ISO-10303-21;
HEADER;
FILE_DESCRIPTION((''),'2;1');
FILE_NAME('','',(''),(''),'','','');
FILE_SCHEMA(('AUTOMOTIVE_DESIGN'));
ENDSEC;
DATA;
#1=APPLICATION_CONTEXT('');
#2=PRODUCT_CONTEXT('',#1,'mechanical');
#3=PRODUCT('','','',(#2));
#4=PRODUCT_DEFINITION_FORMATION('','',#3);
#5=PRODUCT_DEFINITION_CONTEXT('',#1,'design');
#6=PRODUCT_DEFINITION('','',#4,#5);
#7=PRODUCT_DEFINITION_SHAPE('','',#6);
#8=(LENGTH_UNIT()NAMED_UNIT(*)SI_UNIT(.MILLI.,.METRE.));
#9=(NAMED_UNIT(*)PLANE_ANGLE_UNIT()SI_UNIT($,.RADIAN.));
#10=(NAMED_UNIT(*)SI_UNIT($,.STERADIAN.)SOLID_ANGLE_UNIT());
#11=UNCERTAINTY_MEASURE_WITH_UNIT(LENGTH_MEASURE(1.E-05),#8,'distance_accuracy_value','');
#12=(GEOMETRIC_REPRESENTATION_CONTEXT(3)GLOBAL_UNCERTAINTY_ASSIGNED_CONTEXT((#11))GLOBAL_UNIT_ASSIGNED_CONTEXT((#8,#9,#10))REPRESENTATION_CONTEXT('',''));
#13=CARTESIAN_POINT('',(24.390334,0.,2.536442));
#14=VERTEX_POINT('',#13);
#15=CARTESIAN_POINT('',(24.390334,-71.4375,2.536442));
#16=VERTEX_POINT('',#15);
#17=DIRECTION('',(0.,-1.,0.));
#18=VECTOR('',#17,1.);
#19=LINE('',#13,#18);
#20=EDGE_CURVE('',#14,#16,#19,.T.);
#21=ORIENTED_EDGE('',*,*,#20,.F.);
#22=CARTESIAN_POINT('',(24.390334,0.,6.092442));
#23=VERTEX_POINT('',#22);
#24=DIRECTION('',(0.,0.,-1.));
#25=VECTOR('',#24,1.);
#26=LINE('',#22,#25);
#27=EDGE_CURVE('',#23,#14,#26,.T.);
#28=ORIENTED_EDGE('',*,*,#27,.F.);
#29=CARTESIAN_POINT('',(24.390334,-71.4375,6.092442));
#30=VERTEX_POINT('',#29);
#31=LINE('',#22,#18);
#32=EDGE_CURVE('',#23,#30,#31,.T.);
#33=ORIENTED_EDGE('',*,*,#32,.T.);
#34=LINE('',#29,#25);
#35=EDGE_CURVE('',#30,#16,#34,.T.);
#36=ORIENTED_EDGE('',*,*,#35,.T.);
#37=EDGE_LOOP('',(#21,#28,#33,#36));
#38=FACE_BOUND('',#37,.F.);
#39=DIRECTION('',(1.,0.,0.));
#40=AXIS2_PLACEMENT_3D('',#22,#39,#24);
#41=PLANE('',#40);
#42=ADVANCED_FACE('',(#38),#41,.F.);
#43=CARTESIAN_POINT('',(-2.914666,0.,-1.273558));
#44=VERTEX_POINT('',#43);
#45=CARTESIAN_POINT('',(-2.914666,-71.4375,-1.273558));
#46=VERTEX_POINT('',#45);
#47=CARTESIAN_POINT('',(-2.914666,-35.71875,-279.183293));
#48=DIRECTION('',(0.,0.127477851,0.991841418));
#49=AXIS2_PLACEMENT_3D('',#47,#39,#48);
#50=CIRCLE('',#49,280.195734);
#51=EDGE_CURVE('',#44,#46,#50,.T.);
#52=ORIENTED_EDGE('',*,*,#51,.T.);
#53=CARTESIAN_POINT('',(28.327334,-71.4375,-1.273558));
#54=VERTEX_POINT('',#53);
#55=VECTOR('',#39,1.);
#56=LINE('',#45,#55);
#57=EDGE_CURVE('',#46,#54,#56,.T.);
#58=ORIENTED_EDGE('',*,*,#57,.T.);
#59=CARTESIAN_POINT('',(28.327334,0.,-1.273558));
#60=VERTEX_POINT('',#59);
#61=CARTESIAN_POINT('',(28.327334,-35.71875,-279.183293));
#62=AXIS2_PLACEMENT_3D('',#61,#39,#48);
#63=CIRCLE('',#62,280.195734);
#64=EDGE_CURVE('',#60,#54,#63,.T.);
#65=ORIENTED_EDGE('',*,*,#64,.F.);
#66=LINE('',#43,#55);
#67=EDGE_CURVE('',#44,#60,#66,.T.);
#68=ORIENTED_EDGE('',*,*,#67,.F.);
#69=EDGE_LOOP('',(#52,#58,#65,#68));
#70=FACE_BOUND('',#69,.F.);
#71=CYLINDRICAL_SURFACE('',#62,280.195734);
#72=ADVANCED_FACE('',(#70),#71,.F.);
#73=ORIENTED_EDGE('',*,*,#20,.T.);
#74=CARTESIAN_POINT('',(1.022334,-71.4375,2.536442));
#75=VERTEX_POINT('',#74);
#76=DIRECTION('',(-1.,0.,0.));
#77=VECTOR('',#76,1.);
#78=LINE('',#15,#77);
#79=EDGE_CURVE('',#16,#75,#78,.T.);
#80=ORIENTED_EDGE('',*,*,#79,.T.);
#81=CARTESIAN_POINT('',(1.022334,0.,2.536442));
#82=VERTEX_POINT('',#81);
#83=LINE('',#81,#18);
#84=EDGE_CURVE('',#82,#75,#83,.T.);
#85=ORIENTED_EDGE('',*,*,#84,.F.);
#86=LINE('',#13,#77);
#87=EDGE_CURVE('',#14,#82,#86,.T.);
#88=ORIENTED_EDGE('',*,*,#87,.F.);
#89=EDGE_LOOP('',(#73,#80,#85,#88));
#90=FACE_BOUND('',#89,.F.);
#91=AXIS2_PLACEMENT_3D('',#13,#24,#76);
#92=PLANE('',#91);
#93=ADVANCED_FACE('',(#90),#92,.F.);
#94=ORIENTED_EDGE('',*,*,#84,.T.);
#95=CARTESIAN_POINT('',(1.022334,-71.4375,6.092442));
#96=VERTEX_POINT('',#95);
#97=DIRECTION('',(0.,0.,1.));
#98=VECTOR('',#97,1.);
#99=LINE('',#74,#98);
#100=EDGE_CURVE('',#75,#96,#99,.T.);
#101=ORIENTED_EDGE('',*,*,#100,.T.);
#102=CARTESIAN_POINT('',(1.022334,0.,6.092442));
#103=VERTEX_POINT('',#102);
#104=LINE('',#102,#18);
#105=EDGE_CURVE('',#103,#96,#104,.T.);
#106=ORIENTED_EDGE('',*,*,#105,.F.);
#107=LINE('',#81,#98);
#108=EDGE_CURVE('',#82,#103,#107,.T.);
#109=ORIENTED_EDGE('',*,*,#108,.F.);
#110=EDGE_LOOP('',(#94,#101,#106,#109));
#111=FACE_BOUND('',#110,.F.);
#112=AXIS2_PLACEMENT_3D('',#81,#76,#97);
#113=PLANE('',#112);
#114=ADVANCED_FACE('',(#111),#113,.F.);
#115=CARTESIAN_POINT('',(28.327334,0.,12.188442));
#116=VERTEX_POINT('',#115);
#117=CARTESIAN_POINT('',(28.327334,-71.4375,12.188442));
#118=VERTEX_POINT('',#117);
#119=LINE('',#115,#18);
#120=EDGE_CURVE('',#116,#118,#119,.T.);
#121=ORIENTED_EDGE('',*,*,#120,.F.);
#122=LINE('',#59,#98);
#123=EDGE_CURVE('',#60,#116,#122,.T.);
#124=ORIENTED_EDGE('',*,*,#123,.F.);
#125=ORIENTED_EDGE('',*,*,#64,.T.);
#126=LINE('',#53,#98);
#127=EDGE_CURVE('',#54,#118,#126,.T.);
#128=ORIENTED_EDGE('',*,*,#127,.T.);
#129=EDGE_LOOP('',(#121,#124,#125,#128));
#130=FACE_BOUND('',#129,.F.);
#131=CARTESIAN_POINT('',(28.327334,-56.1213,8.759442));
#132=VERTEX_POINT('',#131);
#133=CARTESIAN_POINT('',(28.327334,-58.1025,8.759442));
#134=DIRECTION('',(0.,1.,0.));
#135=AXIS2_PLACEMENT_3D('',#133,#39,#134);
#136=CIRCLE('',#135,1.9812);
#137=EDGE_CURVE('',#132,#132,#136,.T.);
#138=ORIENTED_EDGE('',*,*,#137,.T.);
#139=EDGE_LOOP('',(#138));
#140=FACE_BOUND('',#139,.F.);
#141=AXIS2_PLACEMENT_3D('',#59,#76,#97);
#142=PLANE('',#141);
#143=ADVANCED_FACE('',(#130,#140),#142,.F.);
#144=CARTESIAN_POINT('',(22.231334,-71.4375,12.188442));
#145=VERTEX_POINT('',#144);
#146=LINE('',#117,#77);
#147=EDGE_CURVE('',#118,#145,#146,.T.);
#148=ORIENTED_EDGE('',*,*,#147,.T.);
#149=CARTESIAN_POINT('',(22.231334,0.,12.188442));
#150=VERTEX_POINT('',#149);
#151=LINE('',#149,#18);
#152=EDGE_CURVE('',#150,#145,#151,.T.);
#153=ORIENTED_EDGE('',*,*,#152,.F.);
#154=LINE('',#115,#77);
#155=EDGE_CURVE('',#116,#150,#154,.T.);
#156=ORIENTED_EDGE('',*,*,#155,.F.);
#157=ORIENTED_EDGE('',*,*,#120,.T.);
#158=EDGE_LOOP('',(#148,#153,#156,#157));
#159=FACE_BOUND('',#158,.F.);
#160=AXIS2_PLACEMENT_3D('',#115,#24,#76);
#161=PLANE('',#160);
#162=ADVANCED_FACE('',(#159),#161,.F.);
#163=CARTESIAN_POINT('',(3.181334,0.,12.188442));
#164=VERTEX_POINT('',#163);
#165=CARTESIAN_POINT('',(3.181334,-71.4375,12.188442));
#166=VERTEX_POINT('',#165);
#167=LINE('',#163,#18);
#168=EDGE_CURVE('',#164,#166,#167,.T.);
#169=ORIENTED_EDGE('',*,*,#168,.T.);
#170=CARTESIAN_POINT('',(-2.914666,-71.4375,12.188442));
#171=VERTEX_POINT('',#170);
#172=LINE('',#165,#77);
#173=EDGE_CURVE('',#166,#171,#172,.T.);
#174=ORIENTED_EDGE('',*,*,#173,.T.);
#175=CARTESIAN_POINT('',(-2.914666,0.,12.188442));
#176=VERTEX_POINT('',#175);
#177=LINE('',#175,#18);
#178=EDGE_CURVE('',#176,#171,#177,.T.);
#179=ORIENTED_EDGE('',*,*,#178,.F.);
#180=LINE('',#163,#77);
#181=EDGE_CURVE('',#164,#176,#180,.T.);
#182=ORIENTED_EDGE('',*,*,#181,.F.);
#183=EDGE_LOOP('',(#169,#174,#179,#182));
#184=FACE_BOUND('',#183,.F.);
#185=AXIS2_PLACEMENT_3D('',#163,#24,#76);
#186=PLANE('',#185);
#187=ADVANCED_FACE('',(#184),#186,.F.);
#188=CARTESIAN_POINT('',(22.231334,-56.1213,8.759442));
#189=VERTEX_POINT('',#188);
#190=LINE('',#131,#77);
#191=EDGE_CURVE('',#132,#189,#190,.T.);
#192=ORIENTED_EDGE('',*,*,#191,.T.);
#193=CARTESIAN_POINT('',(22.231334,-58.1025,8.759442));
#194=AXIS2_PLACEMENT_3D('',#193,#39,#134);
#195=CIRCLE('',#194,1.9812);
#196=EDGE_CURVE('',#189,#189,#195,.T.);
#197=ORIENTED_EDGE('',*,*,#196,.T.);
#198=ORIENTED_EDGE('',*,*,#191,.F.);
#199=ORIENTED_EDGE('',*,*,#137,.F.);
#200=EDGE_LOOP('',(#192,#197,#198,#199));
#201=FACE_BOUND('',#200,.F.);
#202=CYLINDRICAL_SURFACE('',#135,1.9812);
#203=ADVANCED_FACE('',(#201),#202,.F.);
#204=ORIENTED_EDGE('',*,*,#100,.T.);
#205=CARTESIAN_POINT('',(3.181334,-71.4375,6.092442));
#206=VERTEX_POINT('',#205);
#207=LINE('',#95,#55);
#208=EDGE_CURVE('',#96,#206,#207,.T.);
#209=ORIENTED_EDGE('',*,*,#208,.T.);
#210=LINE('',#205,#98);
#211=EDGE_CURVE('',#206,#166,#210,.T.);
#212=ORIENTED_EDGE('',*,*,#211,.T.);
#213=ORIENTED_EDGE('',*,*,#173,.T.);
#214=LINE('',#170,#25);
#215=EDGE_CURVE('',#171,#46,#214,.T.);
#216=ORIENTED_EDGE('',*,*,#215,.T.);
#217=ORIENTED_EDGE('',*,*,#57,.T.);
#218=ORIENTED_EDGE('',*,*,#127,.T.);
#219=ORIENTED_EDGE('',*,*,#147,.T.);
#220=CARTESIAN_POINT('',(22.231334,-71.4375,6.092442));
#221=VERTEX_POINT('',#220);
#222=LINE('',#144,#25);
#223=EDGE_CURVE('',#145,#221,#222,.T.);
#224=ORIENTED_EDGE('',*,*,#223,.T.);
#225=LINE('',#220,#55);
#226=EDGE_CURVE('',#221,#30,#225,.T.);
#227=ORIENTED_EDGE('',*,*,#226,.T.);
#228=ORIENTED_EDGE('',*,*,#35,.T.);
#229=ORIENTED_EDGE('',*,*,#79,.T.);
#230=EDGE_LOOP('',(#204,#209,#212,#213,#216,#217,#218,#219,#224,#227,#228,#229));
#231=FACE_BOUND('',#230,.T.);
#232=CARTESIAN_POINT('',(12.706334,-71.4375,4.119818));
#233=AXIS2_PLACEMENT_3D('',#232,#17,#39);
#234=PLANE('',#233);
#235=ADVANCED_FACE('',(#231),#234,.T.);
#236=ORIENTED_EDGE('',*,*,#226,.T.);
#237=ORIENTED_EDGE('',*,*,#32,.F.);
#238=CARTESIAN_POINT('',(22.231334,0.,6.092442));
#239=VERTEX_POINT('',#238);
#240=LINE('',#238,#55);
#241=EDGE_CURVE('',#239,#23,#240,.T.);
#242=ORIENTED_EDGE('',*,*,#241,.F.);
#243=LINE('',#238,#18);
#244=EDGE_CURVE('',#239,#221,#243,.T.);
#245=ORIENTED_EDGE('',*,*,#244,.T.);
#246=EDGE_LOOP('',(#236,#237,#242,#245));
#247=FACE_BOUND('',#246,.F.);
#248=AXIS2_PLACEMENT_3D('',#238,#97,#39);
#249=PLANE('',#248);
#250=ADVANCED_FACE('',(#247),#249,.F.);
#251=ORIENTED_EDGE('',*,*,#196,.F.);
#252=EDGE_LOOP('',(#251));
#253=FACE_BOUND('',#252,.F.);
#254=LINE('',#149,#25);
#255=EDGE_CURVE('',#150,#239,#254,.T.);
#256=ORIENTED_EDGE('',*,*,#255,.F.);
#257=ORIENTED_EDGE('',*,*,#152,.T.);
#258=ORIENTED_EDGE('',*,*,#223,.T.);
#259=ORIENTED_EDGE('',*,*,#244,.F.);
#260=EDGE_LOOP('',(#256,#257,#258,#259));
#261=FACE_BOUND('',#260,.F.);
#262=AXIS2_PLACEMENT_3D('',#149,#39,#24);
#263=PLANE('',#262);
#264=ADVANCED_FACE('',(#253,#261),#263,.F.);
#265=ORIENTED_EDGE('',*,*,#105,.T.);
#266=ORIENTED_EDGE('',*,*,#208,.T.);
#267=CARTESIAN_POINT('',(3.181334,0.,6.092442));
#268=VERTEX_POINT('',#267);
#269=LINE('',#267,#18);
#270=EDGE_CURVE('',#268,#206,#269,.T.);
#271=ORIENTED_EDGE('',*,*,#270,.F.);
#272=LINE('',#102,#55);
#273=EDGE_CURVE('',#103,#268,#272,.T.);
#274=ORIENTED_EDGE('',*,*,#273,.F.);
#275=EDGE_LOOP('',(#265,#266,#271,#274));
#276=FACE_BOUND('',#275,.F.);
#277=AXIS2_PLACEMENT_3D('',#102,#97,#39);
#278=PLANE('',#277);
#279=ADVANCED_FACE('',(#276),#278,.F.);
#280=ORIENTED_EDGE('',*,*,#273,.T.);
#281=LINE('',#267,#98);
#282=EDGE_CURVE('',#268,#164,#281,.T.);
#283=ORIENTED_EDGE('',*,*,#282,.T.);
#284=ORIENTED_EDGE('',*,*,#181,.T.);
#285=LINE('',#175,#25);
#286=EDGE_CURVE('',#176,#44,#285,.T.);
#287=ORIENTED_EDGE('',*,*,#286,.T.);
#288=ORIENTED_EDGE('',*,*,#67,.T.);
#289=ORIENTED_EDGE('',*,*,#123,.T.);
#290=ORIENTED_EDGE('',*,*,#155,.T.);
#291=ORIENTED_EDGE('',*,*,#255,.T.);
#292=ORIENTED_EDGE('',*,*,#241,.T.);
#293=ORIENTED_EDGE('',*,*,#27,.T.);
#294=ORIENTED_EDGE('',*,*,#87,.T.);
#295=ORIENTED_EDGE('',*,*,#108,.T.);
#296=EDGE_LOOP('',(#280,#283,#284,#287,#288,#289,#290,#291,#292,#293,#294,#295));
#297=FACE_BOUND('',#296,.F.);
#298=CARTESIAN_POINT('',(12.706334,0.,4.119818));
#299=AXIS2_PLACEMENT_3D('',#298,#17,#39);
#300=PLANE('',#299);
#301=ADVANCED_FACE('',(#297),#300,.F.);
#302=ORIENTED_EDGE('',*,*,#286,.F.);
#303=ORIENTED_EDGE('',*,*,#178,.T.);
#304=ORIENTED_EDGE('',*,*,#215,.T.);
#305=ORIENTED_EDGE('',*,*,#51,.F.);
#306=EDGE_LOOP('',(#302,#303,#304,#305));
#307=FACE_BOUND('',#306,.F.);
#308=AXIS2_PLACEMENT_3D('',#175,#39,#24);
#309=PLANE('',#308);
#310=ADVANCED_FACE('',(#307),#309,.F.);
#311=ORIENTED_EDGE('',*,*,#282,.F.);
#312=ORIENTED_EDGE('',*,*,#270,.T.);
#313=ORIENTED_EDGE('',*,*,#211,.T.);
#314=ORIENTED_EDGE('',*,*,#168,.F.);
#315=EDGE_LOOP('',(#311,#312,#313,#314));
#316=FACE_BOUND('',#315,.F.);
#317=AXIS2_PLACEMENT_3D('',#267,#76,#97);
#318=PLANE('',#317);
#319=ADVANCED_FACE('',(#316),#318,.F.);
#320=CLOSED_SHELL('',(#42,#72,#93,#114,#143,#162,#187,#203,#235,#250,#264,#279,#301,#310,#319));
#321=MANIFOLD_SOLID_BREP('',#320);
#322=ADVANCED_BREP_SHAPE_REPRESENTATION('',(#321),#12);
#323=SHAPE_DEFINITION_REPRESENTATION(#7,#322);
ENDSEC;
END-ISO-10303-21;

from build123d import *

# Parameters (mm, degrees)
F1_DEPTH = 71.4375
F2_R     = 1.9812
F3_DEPTH = 6.096
F5_DEPTH = 31.243


# Not quite as in the source:
# - a feature names something its author has since deleted; it is built from what else it names


with BuildPart() as f1:
    # F0 (on Front) → F1 (new body)
    with BuildSketch(Plane.XZ):
        Polygon((3.1813341729, 6.0924417882), (3.1813341729, 12.1884417882), (-2.9146658271, 12.1884417882), (-2.9146658271, -1.2735582118), (28.3273341729, -1.2735582118), (28.3273341729, 12.1884417882), (22.2313341729, 12.1884417882), (22.2313341729, 6.0924417882), (24.3903341729, 6.0924417882), (24.3903341729, 2.5364417882), (1.0223341729, 2.5364417882), (1.0223341729, 6.0924417882), align=None)
    extrude(amount=F1_DEPTH)

    # F2 (on face) → F3 (cut, through all)
    with BuildSketch(Plane.YZ.offset(28.3273341729)):
        with Locations((-58.1025, 8.7594417882)):
            Circle(F2_R)
    extrude(amount=-F3_DEPTH, mode=Mode.SUBTRACT)

    # F4 (on face) → F5 (cut, through all)
    with BuildSketch(Plane.YZ.offset(28.3273341729)):
        with BuildLine():
            ThreePointArc((0, -1.2735582118), (-35.71875, 1.0124417882), (-71.4375, -1.2735582118))
            Line((-71.4375, -1.2735582118), (0, -1.2735582118))
        make_face()
    extrude(amount=-F5_DEPTH, mode=Mode.SUBTRACT)


solid = f1.part
